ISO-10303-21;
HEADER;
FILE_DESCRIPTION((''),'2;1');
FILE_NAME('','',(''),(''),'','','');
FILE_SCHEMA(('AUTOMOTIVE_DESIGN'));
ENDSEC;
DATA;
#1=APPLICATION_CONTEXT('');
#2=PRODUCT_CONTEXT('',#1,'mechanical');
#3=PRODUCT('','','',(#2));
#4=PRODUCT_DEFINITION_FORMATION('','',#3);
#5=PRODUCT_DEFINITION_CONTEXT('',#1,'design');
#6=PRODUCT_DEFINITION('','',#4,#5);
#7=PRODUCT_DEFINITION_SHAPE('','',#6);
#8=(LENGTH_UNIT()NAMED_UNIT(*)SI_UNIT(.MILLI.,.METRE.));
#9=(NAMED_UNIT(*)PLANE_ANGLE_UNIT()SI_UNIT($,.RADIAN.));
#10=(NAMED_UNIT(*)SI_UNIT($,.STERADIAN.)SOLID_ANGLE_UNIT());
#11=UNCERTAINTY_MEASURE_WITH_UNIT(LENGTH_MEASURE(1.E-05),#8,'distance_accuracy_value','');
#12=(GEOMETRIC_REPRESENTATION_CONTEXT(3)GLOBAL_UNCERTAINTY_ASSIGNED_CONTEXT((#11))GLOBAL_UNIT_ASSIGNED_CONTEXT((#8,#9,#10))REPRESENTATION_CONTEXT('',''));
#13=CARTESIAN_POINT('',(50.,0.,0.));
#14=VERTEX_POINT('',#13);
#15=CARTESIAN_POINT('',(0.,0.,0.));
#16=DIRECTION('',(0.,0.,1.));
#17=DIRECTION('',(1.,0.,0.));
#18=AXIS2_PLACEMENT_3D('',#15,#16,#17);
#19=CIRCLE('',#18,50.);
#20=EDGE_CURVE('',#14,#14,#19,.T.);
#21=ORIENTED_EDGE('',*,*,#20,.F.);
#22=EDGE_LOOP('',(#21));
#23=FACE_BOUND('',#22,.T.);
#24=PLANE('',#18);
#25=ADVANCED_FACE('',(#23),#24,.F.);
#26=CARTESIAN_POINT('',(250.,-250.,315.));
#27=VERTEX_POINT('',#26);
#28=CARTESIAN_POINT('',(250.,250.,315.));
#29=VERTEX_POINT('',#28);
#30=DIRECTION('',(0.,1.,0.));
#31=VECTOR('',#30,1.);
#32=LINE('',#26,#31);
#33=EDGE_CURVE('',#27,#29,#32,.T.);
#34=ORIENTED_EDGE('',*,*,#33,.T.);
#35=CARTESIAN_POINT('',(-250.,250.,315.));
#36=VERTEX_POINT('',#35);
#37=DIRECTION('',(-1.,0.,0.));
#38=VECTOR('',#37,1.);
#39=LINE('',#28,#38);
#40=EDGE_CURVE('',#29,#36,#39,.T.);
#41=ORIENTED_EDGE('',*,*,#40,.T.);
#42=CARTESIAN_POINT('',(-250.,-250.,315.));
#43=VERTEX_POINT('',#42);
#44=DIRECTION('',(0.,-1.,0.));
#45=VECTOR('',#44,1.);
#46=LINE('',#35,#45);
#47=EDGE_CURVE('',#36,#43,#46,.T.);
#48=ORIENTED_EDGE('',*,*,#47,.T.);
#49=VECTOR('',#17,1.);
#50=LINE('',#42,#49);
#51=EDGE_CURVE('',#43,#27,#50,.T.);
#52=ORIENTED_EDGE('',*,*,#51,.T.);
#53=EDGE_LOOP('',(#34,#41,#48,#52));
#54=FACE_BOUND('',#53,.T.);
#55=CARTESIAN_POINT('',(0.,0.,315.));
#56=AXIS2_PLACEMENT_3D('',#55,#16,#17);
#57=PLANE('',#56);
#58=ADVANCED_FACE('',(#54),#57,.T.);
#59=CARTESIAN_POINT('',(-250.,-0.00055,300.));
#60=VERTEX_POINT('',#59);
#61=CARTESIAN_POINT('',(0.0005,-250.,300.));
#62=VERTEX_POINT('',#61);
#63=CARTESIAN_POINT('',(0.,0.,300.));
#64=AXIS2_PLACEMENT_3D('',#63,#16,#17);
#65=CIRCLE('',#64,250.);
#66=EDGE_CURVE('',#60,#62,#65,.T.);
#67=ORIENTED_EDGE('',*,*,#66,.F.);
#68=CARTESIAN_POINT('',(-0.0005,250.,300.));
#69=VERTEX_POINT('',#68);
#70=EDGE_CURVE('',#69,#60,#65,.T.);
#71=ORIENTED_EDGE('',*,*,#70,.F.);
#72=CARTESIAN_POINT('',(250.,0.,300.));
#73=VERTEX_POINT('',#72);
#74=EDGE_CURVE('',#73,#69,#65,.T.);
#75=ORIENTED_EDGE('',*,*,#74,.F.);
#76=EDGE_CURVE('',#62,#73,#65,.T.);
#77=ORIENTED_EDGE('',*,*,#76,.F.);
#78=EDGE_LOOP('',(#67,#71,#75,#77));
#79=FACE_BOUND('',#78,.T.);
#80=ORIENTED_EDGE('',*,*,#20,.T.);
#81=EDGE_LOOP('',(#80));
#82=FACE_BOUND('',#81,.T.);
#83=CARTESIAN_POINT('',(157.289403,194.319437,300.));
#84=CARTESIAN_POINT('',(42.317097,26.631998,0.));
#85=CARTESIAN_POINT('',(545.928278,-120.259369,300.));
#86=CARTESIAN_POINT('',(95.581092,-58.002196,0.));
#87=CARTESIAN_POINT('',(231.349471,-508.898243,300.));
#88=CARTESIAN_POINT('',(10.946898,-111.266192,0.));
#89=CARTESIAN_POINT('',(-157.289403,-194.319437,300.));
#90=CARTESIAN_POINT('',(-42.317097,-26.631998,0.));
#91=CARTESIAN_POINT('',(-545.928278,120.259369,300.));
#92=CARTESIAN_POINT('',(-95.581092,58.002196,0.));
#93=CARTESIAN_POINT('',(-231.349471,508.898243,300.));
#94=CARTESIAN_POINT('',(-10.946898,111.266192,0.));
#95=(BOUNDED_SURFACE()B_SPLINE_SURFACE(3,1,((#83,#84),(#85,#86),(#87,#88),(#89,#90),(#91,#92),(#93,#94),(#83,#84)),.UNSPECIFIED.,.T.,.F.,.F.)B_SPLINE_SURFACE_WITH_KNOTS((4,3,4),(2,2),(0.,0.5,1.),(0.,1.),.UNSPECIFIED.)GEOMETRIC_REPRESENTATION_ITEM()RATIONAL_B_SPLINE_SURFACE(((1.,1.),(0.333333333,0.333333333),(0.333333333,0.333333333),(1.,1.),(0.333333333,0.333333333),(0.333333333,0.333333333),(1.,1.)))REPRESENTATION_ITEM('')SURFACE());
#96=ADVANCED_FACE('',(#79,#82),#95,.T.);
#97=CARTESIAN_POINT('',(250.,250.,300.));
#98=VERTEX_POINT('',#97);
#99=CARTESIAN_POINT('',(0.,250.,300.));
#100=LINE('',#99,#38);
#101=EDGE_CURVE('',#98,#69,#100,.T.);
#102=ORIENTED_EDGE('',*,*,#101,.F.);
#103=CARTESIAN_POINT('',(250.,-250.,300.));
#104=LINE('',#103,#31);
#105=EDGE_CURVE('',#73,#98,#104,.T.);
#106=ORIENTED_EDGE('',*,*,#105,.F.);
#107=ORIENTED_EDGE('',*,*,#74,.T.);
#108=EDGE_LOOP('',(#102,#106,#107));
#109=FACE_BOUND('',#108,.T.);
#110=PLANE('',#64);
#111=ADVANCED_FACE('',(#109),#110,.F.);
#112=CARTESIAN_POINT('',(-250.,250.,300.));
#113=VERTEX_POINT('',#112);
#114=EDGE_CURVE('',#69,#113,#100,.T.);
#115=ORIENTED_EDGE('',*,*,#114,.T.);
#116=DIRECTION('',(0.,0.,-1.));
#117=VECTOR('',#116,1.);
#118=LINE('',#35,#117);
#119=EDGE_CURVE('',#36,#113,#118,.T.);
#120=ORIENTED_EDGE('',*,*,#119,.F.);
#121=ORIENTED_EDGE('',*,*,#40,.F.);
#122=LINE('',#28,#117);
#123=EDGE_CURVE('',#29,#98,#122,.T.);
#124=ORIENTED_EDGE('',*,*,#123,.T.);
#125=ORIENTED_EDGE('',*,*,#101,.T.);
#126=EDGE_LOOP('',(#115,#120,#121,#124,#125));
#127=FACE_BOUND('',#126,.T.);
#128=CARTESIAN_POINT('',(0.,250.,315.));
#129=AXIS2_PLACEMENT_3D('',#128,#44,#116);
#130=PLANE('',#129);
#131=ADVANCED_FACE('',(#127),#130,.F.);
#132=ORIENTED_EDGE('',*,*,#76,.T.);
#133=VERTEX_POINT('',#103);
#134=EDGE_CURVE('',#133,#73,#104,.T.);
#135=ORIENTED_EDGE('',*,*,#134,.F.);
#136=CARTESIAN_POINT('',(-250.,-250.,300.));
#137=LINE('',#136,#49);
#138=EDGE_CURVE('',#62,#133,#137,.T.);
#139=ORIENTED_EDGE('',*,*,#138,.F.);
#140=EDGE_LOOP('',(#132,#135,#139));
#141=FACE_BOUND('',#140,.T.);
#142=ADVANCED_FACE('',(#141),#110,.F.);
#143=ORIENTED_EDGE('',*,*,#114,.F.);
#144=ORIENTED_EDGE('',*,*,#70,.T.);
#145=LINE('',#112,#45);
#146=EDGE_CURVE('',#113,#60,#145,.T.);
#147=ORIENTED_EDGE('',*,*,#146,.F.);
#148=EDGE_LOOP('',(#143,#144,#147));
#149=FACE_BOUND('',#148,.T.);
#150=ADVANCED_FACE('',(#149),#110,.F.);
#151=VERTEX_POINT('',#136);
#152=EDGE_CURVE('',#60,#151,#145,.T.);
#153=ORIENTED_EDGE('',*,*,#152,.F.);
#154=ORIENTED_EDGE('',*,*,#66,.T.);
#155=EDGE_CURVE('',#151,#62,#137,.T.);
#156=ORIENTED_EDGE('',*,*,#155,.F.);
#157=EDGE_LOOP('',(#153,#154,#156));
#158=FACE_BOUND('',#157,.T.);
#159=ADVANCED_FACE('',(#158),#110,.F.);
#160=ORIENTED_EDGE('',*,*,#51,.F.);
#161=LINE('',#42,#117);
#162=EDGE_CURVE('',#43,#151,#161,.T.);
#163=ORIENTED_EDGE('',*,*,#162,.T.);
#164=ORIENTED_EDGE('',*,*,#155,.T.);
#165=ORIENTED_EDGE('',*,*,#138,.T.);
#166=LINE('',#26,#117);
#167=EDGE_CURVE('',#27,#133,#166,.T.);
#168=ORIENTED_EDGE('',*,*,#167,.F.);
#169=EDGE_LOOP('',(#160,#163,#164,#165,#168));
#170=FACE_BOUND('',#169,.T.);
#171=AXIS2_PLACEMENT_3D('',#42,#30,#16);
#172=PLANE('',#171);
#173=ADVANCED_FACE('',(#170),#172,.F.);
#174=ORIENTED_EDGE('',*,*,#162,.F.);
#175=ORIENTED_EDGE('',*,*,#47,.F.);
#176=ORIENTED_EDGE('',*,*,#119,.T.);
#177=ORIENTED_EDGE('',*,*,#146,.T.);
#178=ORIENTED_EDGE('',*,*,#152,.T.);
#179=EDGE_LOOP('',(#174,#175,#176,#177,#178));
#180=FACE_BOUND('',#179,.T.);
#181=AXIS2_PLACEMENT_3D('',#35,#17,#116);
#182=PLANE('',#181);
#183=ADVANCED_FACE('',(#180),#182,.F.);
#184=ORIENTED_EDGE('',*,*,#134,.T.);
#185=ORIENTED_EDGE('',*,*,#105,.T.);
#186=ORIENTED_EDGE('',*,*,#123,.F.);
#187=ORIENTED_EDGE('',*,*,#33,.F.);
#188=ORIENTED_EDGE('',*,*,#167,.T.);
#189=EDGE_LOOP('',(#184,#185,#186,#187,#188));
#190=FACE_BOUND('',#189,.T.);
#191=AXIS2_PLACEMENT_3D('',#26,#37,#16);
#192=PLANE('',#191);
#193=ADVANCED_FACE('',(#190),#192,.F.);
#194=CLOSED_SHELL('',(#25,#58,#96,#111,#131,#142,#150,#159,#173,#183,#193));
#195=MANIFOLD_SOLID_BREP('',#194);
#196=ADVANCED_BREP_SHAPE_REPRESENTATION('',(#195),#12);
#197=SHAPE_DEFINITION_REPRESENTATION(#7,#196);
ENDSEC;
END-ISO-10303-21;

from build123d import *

# Parameters (mm, degrees)
EXTRUDE_1_DEPTH = 15


with BuildPart() as part:
    # 放样1: read off the stored shape, not the designer's step
    # 放样1: loft between two sections, ruled curve by curve
    loft_1_from = [
        Edge.make_bspline([(157.289403045, 194.319437241, 300), (545.928277528, -120.259368848, 300), (231.349471438, -508.898243331, 300), (-157.289403045, -194.319437241, 300), (-545.928277528, 120.259368848, 300), (-231.349471438, 508.898243331, 300), (157.289403045, 194.319437241, 300)], [0, 0, 0, 0, 0.5, 0.5, 0.5, 1, 1, 1, 1], 3, [1, 0.333333333, 0.333333333, 1, 0.333333333, 0.333333333, 1]),
    ]
    loft_1_to = [
        Edge.make_bspline([(42.317097013, 26.631997679, 0), (95.581092372, -58.002196347, 0), (10.946898346, -111.266191705, 0), (-42.317097013, -26.631997679, 0), (-95.581092372, 58.002196347, 0), (-10.946898346, 111.266191705, 0), (42.317097013, 26.631997679, 0)], [0, 0, 0, 0, 0.5, 0.5, 0.5, 1, 1, 1, 1], 3, [1, 0.333333333, 0.333333333, 1, 0.333333333, 0.333333333, 1]),
    ]
    loft_1 = Solid(Shell([*[Face.make_surface_from_curves(loft_1_from[k], loft_1_to[k]) for k in range(1)], Face(Wire(loft_1_from)), Face(Wire(loft_1_to))]))
    add(loft_1)

    # 草图4 → 凸台-拉伸1 (add)
    with BuildSketch(Plane.XY.offset(300)):
        Polygon((0, 250), (-250, 250), (-250, -250), (250, -250), (250, 250), align=None)
    extrude(amount=EXTRUDE_1_DEPTH)


solid = part.part
